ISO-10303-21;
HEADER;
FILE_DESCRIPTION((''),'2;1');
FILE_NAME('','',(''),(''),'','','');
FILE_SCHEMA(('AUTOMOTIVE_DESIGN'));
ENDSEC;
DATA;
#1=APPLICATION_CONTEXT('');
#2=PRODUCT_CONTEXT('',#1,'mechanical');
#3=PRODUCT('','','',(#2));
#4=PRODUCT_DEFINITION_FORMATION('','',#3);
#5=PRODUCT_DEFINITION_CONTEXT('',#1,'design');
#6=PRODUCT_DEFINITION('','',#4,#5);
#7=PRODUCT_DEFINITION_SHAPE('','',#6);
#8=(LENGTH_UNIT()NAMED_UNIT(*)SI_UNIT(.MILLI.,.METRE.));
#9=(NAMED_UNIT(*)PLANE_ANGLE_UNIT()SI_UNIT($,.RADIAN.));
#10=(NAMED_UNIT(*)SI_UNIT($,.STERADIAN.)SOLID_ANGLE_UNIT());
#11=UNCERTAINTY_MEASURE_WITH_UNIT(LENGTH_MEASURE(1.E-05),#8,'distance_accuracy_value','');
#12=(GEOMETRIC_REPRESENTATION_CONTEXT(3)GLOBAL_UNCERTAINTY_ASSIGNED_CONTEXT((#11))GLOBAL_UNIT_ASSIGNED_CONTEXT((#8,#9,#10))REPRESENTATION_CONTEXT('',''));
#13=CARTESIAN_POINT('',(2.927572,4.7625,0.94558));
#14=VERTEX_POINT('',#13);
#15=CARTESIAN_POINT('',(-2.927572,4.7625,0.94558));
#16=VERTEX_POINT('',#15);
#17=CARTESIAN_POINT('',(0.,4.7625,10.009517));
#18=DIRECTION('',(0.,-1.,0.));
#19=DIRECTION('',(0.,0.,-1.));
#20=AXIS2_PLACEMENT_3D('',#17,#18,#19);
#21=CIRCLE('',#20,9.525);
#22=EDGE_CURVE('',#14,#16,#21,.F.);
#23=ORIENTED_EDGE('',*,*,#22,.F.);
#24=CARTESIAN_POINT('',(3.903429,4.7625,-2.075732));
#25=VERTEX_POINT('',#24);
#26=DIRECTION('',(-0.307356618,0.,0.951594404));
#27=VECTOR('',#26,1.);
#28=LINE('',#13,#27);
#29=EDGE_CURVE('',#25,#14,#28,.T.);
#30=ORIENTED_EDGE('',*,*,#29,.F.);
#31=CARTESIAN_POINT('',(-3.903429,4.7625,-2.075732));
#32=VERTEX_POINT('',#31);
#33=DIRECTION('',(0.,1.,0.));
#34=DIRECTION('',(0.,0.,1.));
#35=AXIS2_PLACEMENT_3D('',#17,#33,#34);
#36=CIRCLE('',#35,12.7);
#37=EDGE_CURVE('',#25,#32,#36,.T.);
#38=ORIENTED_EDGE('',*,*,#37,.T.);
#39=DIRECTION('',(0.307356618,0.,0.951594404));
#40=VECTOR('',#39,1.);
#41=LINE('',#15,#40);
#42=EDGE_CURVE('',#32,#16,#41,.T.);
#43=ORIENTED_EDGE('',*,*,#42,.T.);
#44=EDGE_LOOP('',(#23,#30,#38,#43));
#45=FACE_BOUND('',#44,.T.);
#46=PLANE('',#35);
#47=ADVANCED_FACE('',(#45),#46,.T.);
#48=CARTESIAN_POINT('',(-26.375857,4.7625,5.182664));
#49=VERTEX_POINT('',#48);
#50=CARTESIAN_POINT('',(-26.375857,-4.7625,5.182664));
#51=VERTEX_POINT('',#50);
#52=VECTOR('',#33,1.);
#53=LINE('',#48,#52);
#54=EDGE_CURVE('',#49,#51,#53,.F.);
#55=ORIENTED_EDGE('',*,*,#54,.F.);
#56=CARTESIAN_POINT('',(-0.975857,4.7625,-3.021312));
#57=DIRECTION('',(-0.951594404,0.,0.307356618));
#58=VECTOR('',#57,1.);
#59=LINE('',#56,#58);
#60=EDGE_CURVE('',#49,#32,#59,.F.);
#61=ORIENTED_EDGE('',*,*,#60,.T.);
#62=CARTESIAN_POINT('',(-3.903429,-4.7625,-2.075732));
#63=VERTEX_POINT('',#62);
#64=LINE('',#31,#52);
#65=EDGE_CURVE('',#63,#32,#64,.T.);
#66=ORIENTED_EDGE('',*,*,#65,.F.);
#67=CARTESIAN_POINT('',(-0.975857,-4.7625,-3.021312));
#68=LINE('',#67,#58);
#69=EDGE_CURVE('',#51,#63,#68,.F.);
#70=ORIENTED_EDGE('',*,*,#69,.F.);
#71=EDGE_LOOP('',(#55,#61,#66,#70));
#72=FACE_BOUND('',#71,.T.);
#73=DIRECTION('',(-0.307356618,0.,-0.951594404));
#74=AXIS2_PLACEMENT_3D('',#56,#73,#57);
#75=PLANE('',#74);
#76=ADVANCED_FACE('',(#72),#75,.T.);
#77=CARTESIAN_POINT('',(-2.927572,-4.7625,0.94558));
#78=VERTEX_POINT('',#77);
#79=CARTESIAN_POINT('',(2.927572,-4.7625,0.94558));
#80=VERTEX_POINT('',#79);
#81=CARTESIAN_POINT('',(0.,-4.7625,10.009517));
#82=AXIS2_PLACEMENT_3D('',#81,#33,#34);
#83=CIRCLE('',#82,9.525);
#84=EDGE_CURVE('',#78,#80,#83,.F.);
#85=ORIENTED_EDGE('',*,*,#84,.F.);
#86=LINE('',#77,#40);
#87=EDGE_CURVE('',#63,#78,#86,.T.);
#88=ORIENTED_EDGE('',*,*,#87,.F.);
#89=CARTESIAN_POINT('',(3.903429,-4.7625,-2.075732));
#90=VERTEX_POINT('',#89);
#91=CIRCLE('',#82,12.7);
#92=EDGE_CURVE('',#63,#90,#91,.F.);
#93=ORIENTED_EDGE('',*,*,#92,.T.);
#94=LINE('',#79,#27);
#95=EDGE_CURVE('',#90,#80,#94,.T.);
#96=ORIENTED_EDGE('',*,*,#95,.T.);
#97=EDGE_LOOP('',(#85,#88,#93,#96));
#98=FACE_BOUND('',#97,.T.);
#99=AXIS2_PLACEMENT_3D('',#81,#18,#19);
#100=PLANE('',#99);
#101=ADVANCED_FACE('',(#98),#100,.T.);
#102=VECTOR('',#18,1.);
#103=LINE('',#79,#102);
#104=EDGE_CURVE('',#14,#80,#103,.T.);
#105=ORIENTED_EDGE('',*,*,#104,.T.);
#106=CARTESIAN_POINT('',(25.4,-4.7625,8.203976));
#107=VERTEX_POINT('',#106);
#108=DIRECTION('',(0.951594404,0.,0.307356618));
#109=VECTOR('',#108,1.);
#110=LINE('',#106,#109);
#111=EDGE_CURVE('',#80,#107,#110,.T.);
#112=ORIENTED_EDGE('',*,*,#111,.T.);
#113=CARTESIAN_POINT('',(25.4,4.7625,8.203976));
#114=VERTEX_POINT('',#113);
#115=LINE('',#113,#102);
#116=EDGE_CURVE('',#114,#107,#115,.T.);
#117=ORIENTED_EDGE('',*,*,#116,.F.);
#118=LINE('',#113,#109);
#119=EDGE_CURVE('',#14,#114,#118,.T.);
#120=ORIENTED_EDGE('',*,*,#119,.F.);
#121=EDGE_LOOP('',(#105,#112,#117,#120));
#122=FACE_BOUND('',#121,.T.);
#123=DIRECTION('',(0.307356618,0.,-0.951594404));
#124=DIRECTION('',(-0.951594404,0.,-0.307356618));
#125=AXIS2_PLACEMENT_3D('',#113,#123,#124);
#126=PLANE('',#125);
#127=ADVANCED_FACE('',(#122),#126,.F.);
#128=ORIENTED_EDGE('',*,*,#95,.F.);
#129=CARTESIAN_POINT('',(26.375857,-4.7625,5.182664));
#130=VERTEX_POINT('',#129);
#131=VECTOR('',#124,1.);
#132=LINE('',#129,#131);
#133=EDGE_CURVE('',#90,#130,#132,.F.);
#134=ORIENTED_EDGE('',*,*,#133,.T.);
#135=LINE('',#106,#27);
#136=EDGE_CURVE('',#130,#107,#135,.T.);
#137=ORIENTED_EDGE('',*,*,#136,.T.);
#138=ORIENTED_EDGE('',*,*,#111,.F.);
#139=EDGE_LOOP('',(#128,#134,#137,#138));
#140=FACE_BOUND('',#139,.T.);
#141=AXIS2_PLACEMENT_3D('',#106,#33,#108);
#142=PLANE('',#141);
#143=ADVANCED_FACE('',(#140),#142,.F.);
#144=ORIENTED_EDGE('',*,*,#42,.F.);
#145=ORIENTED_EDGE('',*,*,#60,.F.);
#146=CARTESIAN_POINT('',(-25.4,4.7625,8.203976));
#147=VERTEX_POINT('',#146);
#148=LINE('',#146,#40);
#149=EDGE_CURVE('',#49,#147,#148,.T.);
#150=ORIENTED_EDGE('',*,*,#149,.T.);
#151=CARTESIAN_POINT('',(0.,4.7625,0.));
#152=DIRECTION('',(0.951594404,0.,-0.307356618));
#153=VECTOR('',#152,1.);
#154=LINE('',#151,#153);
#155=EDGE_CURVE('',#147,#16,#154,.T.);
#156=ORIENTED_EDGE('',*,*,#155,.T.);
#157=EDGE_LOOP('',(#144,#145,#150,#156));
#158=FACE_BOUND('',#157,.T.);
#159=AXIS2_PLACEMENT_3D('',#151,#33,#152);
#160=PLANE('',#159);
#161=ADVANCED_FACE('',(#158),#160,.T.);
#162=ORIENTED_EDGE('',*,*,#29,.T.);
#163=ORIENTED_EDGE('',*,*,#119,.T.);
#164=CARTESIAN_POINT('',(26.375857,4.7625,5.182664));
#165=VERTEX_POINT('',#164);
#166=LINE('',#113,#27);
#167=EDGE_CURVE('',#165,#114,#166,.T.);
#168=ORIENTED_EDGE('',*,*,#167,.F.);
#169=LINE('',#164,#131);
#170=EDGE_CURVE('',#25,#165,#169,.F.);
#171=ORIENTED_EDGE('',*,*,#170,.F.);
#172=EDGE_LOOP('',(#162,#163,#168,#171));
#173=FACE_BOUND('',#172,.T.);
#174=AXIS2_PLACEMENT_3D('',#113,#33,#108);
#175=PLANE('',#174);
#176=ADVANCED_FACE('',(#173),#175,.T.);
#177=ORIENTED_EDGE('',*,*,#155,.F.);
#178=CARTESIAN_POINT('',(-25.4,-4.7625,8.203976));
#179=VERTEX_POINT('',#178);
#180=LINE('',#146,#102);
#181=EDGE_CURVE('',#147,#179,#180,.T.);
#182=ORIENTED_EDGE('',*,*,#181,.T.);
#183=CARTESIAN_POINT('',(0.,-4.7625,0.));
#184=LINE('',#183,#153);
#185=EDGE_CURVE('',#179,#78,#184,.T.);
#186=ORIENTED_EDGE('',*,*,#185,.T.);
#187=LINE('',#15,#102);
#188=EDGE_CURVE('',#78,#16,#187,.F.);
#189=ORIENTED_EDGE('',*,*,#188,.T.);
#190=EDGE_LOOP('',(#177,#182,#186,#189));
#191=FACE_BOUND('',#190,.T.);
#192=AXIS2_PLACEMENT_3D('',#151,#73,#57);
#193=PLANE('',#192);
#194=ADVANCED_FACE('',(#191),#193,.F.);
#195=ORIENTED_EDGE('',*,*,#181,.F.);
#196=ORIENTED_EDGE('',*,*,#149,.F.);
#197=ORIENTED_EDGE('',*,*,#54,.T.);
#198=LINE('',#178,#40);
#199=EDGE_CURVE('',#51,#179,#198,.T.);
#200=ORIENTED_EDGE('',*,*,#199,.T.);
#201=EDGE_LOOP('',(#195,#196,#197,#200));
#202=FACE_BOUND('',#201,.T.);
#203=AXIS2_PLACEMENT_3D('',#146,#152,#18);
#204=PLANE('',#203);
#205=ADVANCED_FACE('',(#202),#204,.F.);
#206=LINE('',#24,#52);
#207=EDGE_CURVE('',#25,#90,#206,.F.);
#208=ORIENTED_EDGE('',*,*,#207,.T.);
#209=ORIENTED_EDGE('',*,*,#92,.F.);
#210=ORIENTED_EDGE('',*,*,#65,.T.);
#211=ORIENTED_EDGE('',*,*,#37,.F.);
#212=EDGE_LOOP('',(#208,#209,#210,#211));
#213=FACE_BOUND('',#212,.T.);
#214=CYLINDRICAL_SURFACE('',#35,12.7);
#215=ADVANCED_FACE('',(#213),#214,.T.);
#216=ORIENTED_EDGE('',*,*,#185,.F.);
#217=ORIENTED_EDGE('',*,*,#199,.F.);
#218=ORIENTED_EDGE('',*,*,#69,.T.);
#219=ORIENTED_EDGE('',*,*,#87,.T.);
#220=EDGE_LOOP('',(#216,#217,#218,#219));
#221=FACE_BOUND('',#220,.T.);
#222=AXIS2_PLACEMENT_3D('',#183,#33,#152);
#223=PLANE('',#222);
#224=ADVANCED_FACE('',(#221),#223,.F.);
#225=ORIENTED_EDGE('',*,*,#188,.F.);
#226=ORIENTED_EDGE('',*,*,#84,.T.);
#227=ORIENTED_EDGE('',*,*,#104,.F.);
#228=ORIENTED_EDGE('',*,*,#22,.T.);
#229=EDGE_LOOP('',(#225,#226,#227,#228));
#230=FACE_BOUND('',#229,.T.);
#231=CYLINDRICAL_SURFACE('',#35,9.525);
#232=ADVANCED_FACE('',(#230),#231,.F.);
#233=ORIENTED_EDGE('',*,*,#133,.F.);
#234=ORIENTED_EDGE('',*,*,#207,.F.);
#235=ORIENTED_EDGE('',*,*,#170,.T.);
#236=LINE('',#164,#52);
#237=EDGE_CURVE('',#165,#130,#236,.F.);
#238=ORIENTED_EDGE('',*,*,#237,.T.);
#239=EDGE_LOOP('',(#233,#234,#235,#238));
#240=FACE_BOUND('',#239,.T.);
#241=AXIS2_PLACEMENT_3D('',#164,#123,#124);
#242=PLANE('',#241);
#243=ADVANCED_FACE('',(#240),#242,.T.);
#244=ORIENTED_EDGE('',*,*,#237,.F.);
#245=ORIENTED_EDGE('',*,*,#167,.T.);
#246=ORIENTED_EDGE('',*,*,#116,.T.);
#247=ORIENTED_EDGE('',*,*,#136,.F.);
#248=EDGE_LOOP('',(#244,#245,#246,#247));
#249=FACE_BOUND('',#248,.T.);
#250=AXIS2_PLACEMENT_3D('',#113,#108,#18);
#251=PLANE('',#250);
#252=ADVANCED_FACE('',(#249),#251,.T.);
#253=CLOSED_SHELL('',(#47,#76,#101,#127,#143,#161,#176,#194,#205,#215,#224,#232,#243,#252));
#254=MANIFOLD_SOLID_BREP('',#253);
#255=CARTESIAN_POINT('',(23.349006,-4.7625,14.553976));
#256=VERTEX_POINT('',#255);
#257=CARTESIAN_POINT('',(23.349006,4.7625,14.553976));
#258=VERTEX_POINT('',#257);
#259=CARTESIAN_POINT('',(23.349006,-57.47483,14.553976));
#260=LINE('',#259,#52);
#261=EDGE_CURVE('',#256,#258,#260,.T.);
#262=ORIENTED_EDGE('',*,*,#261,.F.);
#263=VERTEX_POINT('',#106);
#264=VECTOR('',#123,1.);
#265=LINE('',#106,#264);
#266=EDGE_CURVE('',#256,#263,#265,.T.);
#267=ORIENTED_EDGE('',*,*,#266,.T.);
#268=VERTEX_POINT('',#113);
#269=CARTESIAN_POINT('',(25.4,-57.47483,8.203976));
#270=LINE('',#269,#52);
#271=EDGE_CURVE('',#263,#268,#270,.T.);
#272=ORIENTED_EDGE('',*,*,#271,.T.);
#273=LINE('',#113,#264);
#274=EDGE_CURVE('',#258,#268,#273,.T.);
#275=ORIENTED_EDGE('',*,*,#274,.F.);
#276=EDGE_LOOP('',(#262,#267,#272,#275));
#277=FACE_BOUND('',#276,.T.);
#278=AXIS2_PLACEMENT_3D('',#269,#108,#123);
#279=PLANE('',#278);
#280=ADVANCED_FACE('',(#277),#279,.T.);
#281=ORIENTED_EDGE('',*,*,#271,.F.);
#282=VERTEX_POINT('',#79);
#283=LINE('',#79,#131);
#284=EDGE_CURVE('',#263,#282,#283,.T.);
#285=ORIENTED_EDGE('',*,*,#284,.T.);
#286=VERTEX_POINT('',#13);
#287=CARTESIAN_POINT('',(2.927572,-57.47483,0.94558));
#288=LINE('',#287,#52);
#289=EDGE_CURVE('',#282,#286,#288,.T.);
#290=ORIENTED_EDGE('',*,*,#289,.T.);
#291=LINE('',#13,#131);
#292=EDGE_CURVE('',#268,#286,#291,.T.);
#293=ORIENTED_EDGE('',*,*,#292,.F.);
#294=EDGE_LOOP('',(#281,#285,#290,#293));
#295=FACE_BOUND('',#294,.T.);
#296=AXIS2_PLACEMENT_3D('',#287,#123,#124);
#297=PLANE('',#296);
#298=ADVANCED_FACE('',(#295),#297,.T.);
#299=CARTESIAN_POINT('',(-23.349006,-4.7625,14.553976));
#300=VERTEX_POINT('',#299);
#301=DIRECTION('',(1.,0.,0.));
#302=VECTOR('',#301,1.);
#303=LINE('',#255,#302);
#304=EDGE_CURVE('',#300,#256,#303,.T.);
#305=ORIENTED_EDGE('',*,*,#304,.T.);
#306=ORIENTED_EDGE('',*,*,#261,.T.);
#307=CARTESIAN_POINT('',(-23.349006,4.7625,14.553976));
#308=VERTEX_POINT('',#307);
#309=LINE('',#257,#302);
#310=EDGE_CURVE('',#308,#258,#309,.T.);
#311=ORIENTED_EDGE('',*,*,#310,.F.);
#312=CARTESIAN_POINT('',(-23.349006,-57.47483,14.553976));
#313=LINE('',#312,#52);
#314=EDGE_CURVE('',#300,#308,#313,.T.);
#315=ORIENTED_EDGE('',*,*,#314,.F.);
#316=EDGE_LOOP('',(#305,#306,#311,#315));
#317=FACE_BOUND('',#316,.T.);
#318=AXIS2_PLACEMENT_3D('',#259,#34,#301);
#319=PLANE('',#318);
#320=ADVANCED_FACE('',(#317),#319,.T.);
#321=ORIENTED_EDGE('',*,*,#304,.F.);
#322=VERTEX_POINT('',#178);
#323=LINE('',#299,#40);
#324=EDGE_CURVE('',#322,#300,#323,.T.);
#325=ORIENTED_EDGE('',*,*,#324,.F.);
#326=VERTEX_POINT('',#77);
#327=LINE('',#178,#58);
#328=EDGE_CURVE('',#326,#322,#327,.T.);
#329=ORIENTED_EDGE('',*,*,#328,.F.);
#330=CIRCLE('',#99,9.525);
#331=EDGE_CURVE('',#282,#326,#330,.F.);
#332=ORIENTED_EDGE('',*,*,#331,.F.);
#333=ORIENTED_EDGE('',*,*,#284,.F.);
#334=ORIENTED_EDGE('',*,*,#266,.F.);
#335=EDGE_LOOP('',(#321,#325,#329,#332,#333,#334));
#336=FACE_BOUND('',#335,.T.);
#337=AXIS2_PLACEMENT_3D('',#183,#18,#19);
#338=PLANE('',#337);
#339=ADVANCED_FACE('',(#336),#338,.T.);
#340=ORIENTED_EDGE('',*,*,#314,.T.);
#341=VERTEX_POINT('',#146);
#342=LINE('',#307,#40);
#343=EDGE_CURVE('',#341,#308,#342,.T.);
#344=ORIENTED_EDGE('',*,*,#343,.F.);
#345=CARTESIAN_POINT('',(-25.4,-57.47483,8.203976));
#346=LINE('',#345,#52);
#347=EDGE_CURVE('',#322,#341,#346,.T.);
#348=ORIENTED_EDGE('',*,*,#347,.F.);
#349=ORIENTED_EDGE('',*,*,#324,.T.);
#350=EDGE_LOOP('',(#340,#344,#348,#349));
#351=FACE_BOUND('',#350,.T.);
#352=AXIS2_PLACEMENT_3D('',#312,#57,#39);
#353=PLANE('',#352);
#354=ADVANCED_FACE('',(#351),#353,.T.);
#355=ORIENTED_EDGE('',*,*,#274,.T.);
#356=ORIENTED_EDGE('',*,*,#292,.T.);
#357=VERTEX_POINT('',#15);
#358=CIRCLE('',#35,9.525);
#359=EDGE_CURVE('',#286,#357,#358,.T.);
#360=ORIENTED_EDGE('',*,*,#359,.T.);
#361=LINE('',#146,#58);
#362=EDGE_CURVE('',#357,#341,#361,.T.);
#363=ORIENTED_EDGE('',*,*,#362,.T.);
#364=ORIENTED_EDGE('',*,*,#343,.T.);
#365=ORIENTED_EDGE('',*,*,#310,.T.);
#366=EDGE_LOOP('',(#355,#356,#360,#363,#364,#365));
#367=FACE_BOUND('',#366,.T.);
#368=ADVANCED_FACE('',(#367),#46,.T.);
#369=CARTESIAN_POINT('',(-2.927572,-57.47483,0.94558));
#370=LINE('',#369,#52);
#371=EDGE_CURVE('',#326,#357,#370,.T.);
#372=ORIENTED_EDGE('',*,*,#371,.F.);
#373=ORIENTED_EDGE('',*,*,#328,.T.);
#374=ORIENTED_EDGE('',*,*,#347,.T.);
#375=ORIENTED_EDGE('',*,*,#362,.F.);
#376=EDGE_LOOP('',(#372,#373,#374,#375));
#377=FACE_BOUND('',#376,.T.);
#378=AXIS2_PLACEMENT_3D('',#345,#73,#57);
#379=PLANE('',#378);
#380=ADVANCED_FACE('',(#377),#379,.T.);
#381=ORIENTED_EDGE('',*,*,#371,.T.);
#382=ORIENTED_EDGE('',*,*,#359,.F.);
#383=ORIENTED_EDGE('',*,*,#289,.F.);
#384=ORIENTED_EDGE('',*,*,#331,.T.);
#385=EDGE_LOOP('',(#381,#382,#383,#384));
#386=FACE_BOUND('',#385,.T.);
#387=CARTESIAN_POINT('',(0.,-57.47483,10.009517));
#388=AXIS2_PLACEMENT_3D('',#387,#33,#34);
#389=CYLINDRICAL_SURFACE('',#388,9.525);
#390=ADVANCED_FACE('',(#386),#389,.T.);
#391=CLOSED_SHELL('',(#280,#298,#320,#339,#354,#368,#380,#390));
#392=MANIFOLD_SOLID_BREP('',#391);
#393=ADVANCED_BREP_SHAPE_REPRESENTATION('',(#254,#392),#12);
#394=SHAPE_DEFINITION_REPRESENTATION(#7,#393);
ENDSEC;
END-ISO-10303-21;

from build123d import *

# Parameters (mm, degrees)
BOSS_EXTRUDE1_DEPTH    = 4.7625
BOSS_EXTRUDE2_DEPTH    = 9.525
CONVERT_SOLID1_START   = -4.7625
CONVERT_SOLID1_DEPTH   = 9.525
CONVERT_SOLID1_2_DEPTH = 9.525


# Read off the part's stored shape, not the designer's step: Convert-Solid1
with BuildPart() as part:
    # Sketch1 → Boss-Extrude1 (new, symmetric)
    with BuildSketch(Plane(origin=(0, 0, 0), x_dir=(1, 0, 0), z_dir=(0, 1, 0))):
        Polygon((0, 3.33650554), (26.375857262, -5.182664231), (25.4, -8.203976463), (0, 0), (-25.4, -8.203976463), (-26.375857262, -5.182664231), align=None)
    extrude(amount=BOSS_EXTRUDE1_DEPTH, both=True)

    # Convert-Solid1 outline → Convert-Solid1 (cut)
    with BuildSketch(Plane(origin=(0, 0, 0), x_dir=(1, 0, 0), z_dir=(0, 1, 0)).offset(CONVERT_SOLID1_START)):
        with BuildLine():
            ThreePointArc((-3.903429046, 2.07573231), (0, 2.690483381), (3.903429046, 2.07573231))
            Line((3.903429046, 2.07573231), (0, 3.33650554))
            Line((0, 3.33650554), (-3.903429046, 2.07573231))
        make_face()
    extrude(amount=CONVERT_SOLID1_DEPTH, mode=Mode.SUBTRACT)

    # Convert-Solid1 2 outline → Convert-Solid1 2 (add)
    with BuildSketch(Plane(origin=(0, 0, 0), x_dir=(1, 0, 0), z_dir=(0, 1, 0)).offset(CONVERT_SOLID1_START)):
        with BuildLine():
            ThreePointArc((-2.927571785, -0.945579922), (0, -0.484516619), (2.927571785, -0.945579922))
            Line((2.927571785, -0.945579922), (0, 0))
            Line((0, 0), (-2.927571785, -0.945579922))
        make_face()
    extrude(amount=CONVERT_SOLID1_2_DEPTH)


with BuildPart() as body_2:
    # Sketch3 → Boss-Extrude2 (new body)
    with BuildSketch(Plane(origin=(0, 4.7625, 0), x_dir=(1, 0, 0), z_dir=(0, 1, 0))):
        with BuildLine():
            Line((-25.4, -8.203976463), (-2.927571785, -0.945579922))
            ThreePointArc((-2.927571785, -0.945579922), (0, -0.484516619), (2.927571785, -0.945579922))
            Line((2.927571785, -0.945579922), (25.4, -8.203976463))
            Line((25.4, -8.203976463), (23.349005884, -14.553976463))
            Line((23.349005884, -14.553976463), (-23.349005884, -14.553976463))
            Line((-23.349005884, -14.553976463), (-25.4, -8.203976463))
        make_face()
    extrude(amount=-BOSS_EXTRUDE2_DEPTH)


solid = Compound([part.part, body_2.part])
